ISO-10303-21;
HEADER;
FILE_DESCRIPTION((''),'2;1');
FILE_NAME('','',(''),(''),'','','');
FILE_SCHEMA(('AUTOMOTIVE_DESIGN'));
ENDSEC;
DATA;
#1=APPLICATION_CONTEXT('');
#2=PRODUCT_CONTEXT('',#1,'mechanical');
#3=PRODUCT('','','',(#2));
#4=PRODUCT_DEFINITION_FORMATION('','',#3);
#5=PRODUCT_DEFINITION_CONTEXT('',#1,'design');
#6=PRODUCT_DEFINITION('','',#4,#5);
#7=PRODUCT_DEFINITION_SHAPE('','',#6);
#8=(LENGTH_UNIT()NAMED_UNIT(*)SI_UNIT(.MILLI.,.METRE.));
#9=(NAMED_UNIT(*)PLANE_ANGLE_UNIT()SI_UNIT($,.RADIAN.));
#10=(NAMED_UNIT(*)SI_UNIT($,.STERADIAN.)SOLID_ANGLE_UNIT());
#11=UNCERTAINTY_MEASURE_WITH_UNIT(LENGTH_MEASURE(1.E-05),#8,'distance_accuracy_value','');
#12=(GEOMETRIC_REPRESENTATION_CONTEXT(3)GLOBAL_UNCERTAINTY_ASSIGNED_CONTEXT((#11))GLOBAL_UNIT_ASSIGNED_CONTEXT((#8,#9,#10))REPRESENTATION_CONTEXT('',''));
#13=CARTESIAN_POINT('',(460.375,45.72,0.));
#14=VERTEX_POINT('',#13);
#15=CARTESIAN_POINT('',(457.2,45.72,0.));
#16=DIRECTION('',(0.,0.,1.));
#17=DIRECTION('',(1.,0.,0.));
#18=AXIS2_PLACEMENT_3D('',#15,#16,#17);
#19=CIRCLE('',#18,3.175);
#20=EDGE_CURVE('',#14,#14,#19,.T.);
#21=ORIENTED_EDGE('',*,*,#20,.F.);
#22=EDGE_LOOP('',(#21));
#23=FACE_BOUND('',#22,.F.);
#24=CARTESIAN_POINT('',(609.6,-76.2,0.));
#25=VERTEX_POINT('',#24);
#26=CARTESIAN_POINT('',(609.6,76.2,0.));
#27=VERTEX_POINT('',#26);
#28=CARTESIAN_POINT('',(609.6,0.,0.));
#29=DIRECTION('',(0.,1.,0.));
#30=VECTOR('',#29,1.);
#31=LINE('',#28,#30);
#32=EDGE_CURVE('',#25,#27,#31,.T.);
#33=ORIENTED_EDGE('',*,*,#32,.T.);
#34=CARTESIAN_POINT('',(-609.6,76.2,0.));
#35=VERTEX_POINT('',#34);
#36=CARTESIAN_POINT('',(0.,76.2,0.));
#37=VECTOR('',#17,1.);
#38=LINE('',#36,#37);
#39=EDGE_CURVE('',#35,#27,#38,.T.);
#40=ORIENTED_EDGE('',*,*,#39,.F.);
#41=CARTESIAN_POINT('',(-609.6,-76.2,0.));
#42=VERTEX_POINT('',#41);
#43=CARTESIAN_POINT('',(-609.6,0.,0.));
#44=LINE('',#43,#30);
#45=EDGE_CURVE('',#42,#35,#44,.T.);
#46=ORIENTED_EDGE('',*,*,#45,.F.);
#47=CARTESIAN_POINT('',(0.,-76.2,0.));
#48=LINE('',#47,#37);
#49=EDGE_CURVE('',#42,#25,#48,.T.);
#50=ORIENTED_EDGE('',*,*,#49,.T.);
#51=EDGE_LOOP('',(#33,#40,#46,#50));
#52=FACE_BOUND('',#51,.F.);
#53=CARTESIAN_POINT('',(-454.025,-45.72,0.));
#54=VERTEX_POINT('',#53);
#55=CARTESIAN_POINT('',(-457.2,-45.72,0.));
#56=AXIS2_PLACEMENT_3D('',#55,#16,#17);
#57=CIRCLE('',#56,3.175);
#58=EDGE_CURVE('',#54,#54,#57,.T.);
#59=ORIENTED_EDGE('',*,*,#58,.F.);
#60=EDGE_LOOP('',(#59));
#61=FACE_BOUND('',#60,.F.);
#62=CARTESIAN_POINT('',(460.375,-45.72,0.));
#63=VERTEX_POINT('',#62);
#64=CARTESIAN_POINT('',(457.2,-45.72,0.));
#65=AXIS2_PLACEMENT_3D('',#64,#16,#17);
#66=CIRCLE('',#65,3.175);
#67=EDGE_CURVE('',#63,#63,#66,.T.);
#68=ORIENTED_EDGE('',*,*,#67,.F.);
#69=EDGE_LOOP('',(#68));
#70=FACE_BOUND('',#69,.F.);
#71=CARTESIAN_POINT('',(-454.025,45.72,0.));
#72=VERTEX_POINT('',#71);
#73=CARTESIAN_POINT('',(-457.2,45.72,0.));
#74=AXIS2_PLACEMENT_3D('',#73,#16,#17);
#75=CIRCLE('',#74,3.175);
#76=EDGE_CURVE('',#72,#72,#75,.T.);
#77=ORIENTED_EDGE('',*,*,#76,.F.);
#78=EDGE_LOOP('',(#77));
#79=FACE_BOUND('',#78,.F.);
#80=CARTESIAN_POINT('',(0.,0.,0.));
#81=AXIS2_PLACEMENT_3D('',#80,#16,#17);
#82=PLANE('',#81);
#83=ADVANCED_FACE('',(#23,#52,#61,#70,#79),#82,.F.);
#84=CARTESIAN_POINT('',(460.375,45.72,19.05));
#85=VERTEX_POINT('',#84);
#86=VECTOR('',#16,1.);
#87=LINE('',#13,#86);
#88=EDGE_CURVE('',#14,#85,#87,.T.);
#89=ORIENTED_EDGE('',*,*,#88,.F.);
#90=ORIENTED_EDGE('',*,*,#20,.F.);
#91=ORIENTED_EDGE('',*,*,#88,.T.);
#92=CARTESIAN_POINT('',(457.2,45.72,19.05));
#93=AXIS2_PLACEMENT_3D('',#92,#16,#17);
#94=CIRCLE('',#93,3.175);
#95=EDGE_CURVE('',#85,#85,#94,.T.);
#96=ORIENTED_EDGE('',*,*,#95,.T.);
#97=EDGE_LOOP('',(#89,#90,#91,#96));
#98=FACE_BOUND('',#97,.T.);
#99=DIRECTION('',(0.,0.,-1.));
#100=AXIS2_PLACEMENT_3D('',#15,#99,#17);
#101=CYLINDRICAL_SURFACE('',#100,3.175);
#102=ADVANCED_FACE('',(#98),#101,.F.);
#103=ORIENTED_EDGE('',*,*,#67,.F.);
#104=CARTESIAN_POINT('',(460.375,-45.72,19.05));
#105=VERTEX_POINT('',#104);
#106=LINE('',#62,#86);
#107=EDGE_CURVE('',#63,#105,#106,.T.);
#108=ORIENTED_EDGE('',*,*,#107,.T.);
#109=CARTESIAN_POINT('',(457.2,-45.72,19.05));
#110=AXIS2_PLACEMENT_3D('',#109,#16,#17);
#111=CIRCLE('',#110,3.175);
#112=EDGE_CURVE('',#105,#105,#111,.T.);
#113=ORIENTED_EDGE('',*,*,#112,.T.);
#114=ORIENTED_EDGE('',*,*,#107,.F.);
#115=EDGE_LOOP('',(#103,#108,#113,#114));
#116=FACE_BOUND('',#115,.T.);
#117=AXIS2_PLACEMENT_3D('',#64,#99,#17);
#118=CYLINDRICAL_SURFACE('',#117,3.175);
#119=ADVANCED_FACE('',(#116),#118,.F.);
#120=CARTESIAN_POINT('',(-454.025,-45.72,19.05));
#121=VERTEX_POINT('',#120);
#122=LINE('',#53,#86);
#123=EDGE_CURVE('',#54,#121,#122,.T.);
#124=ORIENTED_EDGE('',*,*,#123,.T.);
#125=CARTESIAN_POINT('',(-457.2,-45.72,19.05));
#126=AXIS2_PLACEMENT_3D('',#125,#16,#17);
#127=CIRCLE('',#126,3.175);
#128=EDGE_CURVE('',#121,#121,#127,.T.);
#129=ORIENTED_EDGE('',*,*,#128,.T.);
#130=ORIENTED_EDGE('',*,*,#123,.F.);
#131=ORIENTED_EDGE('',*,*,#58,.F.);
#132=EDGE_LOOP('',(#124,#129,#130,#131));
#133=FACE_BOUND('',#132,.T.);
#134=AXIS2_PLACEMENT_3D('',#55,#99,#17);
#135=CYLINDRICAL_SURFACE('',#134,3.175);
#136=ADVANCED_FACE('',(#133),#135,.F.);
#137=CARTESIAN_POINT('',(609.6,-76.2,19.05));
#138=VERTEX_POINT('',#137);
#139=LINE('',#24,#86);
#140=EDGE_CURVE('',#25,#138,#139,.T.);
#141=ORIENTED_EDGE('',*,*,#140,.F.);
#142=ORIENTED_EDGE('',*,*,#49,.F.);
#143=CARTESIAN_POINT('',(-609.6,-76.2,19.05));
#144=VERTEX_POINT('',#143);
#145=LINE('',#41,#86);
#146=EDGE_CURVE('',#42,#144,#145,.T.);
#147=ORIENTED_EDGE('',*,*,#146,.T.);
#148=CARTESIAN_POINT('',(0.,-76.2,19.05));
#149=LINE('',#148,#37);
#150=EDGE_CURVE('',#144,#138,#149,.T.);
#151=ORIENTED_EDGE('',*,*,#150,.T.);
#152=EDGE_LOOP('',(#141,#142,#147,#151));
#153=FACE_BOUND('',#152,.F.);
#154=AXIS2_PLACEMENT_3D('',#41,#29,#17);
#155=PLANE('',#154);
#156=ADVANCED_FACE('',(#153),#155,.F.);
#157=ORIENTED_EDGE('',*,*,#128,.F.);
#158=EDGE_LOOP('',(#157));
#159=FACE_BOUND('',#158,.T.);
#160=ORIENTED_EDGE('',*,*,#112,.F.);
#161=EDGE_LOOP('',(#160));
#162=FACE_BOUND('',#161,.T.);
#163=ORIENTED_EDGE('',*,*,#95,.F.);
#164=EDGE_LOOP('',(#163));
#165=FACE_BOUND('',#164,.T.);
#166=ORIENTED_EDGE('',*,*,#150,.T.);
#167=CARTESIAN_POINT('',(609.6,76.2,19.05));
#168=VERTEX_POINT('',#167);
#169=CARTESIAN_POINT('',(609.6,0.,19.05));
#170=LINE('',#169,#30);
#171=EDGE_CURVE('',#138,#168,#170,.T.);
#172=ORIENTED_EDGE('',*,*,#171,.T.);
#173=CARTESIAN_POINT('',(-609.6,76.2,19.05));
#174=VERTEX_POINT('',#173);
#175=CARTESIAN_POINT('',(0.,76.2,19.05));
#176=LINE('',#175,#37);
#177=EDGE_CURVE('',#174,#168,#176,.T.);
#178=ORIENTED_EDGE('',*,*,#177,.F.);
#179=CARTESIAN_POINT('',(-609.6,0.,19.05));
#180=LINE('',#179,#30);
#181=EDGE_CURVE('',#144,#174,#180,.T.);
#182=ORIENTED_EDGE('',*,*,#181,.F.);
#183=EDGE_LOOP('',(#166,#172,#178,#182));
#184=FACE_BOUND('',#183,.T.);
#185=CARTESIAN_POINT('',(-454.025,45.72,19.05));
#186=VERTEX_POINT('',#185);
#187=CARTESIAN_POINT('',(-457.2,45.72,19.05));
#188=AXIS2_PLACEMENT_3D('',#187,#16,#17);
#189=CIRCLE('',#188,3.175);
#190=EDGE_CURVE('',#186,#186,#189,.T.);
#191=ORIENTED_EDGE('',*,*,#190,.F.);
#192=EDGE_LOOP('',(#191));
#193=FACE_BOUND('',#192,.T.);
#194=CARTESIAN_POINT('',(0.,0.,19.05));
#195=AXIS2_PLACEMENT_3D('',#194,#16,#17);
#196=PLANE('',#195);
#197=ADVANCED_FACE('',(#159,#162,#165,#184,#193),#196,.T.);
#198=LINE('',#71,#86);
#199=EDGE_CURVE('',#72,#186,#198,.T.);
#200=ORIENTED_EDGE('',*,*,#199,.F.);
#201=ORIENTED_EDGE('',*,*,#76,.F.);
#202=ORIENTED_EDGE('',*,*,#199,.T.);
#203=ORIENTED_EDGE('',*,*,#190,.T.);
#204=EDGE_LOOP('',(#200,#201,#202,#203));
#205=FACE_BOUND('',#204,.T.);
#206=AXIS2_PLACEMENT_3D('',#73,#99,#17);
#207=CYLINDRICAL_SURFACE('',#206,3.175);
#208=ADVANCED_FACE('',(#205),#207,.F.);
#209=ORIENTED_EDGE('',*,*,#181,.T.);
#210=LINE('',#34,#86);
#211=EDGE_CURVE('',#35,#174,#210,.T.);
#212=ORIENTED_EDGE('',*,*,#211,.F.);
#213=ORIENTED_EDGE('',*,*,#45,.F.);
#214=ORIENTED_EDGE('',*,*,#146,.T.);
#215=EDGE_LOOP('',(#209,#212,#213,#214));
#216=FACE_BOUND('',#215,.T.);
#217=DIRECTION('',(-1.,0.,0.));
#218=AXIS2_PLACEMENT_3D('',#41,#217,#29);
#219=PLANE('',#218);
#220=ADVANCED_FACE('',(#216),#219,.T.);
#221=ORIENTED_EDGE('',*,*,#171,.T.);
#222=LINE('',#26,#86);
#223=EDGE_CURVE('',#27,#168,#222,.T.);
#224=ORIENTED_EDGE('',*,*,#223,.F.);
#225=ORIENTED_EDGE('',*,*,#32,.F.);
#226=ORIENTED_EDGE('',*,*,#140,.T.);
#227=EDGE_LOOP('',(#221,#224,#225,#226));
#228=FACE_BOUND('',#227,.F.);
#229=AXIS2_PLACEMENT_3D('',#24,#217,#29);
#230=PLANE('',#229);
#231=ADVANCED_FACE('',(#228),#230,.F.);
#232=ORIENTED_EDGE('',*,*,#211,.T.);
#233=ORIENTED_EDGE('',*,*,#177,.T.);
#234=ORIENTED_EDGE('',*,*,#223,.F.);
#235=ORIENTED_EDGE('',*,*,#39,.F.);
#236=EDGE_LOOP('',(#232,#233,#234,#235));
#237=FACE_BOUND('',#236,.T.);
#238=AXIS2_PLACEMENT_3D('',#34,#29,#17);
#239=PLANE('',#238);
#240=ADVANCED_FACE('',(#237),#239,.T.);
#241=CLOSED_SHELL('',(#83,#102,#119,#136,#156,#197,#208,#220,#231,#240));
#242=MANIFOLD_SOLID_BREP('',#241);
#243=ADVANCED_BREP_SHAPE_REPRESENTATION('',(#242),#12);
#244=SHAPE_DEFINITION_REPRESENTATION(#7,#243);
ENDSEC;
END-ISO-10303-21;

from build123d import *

# Parameters (mm, degrees)
F1_W     = 1219.2
F1_H     = 152.4
F1_R     = 3.175
F2_DEPTH = 19.05


# Not quite as in the source:
# - a variable given as a bare number and used for a length is read in inches; the dataset says mm whatever the document's units were


with BuildPart() as f2:
    # F1 (on Top) → F2 (new body)
    with BuildSketch(Plane.XY):
        Rectangle(F1_W, F1_H)
        with Locations((-457.2, -45.72)):
            Circle(F1_R, mode=Mode.SUBTRACT)
        with Locations((457.2, -45.72)):
            Circle(F1_R, mode=Mode.SUBTRACT)
        with Locations((-457.2, 45.72)):
            Circle(F1_R, mode=Mode.SUBTRACT)
        with Locations((457.2, 45.72)):
            Circle(F1_R, mode=Mode.SUBTRACT)
    extrude(amount=F2_DEPTH)


solid = f2.part
